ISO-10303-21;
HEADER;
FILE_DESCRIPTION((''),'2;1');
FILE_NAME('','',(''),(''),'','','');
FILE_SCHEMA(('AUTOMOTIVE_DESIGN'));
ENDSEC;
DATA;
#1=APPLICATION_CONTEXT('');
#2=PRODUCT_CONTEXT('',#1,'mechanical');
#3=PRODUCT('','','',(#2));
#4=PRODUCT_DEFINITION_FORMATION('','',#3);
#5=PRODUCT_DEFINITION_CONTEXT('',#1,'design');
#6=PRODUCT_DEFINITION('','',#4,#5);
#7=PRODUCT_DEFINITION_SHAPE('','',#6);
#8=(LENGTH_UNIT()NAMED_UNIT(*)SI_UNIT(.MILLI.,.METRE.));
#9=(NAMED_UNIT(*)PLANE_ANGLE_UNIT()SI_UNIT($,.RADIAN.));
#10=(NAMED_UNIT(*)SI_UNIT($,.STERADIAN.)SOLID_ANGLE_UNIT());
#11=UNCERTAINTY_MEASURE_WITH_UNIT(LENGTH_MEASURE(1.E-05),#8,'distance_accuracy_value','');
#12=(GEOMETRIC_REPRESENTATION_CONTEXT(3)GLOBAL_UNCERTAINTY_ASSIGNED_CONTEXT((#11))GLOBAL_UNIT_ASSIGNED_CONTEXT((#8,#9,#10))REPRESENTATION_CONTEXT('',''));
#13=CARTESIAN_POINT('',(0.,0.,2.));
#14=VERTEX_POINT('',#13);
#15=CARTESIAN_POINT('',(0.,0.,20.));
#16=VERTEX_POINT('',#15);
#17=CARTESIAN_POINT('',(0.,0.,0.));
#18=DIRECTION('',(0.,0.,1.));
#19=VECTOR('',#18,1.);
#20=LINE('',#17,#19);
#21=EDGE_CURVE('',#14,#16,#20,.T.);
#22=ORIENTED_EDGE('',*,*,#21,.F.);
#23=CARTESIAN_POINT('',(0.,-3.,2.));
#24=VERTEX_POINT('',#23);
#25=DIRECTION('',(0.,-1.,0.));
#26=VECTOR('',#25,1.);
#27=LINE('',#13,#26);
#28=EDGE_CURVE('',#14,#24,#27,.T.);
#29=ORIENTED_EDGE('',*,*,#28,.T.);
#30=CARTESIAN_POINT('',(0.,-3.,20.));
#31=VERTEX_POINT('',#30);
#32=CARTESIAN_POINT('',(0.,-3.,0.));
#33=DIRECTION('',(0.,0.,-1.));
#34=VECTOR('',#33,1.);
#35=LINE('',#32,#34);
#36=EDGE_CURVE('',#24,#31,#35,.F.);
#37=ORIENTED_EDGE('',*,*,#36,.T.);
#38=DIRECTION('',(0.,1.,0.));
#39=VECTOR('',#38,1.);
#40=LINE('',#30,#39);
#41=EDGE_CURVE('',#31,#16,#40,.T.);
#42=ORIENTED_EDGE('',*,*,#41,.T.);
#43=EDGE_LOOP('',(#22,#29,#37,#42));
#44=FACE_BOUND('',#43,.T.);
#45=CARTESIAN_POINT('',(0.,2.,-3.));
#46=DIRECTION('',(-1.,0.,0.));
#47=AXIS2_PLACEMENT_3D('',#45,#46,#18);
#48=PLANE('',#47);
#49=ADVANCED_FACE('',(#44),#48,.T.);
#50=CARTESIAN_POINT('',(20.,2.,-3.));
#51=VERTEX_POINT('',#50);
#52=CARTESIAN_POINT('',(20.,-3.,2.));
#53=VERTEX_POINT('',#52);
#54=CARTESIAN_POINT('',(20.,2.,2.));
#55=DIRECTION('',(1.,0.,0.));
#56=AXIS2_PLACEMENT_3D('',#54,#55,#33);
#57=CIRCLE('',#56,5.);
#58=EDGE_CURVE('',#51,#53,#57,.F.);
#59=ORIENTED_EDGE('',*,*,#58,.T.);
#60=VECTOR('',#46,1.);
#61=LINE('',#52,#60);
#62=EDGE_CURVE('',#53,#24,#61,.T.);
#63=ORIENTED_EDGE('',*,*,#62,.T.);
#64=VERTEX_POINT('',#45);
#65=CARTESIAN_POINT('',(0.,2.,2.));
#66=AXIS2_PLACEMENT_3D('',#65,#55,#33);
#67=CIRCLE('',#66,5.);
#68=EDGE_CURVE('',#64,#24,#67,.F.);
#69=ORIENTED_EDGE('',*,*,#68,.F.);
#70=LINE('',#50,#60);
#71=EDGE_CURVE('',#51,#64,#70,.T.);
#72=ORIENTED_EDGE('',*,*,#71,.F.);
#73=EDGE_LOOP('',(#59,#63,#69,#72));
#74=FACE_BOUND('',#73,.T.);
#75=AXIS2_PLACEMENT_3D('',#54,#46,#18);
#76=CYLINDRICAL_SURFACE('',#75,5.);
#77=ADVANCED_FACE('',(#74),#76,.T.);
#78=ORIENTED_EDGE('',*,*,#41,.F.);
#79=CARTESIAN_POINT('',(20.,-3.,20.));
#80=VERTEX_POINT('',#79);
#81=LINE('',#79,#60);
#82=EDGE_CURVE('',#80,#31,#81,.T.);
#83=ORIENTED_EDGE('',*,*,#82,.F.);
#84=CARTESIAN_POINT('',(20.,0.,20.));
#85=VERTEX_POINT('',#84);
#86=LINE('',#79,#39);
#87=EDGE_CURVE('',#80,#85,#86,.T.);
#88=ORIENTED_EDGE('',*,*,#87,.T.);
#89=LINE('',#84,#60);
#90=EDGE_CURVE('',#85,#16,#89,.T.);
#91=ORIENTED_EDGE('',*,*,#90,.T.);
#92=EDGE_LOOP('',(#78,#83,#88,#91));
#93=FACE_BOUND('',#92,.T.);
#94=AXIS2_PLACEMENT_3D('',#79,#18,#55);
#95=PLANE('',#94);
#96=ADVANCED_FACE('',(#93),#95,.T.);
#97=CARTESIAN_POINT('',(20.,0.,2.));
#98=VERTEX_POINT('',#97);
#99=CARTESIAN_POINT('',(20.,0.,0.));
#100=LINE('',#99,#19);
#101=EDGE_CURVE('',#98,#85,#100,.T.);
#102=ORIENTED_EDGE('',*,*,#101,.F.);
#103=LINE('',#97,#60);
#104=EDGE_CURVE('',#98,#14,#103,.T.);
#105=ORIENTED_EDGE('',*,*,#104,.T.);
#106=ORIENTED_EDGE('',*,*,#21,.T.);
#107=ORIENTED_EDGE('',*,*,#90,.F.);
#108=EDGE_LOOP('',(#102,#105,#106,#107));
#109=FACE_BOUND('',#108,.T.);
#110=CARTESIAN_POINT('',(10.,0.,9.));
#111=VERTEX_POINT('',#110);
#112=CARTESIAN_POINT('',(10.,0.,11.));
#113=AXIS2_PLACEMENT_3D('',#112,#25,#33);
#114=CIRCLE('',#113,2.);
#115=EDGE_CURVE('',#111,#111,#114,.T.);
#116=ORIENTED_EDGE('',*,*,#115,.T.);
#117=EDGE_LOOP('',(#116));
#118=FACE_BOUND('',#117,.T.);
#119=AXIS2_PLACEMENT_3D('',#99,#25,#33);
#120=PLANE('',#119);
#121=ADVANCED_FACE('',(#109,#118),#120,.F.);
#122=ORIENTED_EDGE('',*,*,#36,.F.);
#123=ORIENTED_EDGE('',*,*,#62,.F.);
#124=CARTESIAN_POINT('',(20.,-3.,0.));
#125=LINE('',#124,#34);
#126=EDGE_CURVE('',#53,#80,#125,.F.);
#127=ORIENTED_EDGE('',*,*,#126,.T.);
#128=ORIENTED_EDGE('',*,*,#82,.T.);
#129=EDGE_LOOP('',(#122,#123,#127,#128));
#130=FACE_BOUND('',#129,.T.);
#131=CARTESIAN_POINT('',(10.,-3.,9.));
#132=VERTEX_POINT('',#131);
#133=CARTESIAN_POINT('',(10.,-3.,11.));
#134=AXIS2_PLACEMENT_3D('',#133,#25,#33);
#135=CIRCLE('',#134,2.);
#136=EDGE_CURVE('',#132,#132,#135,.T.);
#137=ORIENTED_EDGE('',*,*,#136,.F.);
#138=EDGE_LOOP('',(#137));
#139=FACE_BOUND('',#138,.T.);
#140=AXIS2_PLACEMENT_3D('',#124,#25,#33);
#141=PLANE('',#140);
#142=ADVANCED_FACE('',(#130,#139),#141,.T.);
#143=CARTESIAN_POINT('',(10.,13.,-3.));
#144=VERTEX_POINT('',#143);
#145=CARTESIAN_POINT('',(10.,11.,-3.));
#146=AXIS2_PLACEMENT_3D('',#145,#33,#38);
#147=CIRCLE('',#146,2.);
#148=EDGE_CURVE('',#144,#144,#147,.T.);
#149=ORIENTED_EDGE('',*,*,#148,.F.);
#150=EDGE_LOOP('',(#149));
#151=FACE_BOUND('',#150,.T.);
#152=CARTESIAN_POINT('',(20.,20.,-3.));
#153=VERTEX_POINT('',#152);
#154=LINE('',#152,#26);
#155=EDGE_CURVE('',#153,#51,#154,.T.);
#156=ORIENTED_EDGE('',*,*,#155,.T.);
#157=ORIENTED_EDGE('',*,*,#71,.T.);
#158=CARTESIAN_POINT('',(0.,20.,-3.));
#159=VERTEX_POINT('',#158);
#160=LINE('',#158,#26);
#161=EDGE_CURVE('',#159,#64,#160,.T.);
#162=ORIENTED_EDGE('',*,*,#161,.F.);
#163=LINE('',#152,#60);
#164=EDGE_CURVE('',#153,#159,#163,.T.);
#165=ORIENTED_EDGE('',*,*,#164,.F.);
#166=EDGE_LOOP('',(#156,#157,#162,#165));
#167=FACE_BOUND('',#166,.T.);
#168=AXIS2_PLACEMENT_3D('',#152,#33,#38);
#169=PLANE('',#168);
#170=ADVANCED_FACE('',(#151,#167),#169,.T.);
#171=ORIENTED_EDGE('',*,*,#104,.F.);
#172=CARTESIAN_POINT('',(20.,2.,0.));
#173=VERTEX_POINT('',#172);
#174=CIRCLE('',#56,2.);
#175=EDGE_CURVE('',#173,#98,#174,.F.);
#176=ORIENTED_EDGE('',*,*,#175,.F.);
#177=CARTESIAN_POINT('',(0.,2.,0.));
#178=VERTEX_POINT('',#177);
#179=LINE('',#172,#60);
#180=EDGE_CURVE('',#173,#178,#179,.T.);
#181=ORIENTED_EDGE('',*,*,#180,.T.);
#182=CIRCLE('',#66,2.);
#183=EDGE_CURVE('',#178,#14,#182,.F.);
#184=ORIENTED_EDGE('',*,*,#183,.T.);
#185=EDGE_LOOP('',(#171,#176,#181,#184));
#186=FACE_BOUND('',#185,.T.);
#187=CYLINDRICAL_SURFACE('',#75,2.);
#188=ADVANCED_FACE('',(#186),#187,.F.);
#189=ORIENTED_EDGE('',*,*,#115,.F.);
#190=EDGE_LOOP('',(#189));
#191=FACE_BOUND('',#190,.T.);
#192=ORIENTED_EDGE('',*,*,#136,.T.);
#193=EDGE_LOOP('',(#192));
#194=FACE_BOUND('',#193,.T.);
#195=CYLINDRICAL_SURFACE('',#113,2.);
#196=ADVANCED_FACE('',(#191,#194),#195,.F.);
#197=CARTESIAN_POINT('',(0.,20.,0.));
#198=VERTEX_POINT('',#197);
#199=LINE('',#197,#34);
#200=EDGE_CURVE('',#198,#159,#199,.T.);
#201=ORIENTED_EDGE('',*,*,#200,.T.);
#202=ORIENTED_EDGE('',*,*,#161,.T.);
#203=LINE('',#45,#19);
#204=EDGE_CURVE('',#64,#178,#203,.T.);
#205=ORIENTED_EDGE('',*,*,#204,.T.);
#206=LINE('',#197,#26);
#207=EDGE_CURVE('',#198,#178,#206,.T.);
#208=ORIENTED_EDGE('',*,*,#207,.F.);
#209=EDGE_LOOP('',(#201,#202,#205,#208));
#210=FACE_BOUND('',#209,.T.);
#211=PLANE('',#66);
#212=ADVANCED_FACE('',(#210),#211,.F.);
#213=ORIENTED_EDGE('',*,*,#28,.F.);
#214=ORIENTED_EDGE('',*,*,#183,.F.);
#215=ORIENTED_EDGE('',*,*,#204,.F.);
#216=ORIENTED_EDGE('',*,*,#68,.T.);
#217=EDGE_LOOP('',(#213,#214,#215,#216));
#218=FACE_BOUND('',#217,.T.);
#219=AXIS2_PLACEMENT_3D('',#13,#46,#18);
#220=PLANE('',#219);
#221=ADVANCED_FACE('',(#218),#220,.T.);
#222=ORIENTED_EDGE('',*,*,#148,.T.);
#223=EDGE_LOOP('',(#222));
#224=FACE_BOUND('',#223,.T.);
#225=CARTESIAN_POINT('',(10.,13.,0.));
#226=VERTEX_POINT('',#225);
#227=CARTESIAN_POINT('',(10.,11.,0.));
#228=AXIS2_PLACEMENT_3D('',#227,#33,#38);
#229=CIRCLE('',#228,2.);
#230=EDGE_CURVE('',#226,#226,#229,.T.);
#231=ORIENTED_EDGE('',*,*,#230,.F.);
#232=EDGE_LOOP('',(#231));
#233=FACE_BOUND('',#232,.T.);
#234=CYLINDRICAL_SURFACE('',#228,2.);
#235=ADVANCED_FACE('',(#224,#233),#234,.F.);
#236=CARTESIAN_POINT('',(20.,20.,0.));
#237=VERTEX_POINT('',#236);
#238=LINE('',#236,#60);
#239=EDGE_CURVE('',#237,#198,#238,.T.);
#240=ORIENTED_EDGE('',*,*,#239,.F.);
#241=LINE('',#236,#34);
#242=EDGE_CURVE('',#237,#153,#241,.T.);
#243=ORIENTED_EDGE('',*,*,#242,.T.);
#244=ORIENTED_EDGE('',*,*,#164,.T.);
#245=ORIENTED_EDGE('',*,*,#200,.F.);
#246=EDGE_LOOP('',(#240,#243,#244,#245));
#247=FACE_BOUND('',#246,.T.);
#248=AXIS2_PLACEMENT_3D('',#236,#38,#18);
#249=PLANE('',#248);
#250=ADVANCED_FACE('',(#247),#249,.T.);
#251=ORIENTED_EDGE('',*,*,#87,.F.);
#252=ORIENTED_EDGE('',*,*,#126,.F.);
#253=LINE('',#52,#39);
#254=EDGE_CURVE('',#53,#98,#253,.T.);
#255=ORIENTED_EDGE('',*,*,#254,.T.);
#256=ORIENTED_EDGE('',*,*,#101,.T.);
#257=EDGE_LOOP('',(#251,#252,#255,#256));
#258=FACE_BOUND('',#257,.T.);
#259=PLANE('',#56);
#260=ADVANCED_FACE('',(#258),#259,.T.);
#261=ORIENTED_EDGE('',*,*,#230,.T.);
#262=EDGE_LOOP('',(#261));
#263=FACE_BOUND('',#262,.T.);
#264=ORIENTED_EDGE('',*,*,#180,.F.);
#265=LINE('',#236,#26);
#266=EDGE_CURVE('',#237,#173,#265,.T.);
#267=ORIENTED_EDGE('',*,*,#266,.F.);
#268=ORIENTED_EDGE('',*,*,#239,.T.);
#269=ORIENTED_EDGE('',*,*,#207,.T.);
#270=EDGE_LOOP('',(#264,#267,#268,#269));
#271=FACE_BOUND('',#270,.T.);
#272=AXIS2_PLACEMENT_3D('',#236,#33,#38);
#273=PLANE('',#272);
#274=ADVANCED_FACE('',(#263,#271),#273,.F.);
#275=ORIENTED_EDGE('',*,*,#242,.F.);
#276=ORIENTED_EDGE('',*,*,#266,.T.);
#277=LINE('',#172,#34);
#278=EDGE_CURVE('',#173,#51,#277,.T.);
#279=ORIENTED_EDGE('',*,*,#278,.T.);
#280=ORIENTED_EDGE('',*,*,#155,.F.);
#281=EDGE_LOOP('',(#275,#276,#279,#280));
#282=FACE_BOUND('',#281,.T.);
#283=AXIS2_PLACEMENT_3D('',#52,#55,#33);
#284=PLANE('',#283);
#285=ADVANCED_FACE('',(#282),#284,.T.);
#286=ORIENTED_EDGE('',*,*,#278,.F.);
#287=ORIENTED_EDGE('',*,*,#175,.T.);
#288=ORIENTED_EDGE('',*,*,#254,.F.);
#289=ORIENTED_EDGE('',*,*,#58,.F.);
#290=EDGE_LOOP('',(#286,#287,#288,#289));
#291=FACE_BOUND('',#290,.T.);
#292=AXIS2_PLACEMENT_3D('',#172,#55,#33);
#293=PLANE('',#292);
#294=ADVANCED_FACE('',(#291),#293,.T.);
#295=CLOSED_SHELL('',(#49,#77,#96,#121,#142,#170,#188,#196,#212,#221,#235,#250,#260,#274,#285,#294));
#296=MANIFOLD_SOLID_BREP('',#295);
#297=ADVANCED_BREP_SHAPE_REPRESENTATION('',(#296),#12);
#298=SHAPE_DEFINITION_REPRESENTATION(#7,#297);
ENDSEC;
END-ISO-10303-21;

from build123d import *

# Parameters (mm, degrees)
BASE_FLANGE1_DEPTH = 20
SKETCH6_R          = 2
CUT_EXTRUDE1_DEPTH = 10
SKETCH7_R          = 2
CUT_EXTRUDE2_DEPTH = 3


# Sheet-metal steps are written as plain solids
with BuildPart() as part:
    # Sketch1 → Base-Flange1 (new body)
    with BuildSketch(Plane(origin=(0, 0, 0), x_dir=(0, 0, -1), z_dir=(1, 0, 0))):
        with BuildLine():
            Line((0, 20), (0, 2))
            ThreePointArc((0, 2), (-0.585786438, 0.585786438), (-2, 0))
            Line((-2, 0), (-20, 0))
            Line((-20, 0), (-20, -3))
            Line((-20, -3), (-2, -3))
            ThreePointArc((-2, -3), (1.535533906, -1.535533906), (3, 2))
            Line((3, 2), (3, 20))
            Line((3, 20), (0, 20))
        make_face()
    extrude(amount=BASE_FLANGE1_DEPTH)

    # Sketch6 → Cut-Extrude1 (cut)
    with BuildSketch(Plane(origin=(0, 0, -3), x_dir=(-1, 0, 0), z_dir=(0, 0, -1))):
        with Locations(Location((-10, 11, 0), (0, 0, 90))):
            Circle(SKETCH6_R)
    extrude(amount=-CUT_EXTRUDE1_DEPTH, mode=Mode.SUBTRACT)

    # Sketch7 → Cut-Extrude2 (cut)
    with BuildSketch(Plane.XZ.offset(3)):
        with Locations(Location((10, 11, 0), (0, 0, 270))):
            Circle(SKETCH7_R)
    extrude(amount=-CUT_EXTRUDE2_DEPTH, mode=Mode.SUBTRACT)


solid = part.part
